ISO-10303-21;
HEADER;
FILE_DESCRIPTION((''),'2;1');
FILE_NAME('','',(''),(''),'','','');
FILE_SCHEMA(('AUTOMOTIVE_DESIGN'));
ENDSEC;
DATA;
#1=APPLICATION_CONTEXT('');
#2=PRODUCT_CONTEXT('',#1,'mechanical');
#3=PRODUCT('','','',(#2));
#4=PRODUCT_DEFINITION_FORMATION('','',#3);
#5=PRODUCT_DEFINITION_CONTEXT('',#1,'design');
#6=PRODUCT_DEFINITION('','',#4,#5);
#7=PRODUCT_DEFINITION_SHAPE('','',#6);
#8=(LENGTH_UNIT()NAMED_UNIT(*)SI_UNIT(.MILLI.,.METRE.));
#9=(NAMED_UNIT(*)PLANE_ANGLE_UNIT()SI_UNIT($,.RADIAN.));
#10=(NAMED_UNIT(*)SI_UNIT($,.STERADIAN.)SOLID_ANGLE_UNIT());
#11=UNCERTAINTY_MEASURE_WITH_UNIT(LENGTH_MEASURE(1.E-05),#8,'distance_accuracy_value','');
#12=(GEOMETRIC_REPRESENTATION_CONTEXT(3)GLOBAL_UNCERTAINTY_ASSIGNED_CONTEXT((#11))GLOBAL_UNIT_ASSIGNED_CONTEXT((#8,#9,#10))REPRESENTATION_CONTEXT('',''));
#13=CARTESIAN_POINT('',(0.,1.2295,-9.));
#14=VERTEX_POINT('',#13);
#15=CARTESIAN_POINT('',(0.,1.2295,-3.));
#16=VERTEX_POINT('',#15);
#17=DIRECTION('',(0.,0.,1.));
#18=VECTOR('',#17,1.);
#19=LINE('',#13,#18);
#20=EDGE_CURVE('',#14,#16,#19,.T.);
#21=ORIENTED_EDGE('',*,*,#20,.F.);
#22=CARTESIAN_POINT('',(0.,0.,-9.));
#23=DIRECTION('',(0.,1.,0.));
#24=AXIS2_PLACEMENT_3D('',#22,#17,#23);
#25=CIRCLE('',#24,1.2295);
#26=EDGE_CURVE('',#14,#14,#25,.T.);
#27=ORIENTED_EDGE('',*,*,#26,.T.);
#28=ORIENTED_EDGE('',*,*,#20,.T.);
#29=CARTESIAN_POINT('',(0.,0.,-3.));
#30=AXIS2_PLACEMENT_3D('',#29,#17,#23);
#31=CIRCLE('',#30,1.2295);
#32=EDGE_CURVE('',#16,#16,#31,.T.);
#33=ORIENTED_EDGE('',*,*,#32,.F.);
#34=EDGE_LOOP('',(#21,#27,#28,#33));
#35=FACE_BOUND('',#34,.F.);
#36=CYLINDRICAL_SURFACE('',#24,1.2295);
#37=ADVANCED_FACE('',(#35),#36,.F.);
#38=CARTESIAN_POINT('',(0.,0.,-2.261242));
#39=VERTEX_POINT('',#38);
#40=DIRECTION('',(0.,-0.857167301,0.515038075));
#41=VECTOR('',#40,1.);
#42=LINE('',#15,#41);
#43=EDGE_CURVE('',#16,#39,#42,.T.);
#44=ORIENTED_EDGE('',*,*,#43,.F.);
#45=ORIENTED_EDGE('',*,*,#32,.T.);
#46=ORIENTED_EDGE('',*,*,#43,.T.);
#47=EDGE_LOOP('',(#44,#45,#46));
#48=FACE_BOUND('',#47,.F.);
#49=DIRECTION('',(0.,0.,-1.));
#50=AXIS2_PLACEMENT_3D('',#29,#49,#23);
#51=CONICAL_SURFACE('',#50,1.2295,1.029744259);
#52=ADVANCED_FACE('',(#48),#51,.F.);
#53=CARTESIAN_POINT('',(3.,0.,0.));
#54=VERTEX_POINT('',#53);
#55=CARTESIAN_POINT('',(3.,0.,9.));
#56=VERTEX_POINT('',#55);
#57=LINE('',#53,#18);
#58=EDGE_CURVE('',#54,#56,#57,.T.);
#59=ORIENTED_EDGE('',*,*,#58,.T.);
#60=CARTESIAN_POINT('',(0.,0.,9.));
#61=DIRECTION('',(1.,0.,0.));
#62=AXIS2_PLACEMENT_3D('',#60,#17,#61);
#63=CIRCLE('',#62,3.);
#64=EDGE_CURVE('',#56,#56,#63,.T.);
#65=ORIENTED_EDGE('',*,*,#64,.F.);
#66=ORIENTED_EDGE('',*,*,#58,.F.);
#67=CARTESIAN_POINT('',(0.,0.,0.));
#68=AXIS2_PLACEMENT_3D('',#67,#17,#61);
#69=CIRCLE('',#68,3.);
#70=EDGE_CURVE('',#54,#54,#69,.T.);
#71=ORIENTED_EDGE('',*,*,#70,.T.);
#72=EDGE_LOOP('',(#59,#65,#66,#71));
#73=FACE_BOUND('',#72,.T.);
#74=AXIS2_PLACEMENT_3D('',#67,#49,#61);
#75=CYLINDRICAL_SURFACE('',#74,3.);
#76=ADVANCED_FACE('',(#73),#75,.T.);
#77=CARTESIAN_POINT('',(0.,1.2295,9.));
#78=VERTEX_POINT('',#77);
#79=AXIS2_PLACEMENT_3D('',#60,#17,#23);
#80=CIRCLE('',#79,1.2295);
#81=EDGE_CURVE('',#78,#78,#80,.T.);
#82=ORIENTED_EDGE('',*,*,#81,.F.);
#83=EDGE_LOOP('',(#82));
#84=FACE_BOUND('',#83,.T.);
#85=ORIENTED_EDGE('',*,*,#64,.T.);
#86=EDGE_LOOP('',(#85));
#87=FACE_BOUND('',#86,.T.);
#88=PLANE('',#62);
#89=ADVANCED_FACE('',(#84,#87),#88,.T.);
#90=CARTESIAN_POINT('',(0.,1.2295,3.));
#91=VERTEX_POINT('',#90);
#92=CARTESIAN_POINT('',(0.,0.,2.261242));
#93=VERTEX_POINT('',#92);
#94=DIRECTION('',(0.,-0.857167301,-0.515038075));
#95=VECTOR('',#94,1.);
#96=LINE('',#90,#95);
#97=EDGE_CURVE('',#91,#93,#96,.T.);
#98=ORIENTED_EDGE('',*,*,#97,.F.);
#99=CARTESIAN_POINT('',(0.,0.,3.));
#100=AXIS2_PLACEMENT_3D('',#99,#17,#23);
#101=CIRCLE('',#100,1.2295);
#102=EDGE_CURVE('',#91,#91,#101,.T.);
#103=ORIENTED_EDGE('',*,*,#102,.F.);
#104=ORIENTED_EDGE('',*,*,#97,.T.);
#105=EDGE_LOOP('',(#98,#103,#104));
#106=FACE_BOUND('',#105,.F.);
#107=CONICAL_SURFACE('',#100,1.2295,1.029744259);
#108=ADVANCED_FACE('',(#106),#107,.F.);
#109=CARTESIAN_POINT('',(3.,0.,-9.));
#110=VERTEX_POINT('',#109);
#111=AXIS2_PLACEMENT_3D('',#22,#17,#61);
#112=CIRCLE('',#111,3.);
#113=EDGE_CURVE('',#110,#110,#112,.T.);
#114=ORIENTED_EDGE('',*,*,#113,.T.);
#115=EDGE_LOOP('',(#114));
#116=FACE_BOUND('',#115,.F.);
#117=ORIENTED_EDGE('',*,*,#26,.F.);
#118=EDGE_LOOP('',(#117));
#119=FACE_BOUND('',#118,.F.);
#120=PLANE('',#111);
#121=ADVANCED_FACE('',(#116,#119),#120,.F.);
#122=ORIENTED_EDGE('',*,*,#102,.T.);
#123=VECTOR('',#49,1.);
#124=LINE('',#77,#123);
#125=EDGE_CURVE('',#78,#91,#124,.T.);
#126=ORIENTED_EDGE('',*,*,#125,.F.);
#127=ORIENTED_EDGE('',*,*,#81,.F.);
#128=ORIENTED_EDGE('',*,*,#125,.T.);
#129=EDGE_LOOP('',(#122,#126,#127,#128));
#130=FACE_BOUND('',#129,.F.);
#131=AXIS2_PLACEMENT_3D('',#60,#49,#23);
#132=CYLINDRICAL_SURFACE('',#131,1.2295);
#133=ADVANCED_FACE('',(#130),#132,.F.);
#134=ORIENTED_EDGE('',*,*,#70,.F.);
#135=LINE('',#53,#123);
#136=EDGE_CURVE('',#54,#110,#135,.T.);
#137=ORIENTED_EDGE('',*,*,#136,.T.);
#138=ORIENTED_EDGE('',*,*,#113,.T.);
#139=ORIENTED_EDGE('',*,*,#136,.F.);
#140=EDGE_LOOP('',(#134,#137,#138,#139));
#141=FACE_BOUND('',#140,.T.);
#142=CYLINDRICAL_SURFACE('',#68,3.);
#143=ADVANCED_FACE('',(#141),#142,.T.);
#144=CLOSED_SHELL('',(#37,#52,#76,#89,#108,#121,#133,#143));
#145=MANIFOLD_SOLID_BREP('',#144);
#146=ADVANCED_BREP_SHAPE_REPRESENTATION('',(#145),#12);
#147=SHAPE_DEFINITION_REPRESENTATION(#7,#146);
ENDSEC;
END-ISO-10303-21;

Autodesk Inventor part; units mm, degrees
ref_plane "YZ Plane" through (0, 0, 0) normal (1, 0, 0) x (0, 1, 0)
ref_plane "XZ Plane" through (0, 0, 0) normal (0, 1, 0) x (-1, 0, 0)
ref_plane "XY Plane" through (0, 0, 0) normal (0, 0, 1) x (1, 0, 0)
sketch "Skizze1" plane through (0, 0, 0) normal (0, 0, 1) x (1, 0, 0)
  circle A0 centre (0, 0) radius 3
  dimension "d0" = 6
extrude "Extrusion1" add sketch "Skizze1" along normal mid plane 18
sketch "Skizze3" plane through (0, 0, -9) normal (0, 0, -1) x (-1, 0, 0)
  point P0 (0, 0)
  point P1 (0, 0)
hole "Bohrung2" at (0, 0, -9) direction (0, 0, 1) diameter 2.459 depth 6 tip angle 118 thread size "M3x0.5" class "6H" standard "ISO Metric profile"
mirror "Spiegeln1" about plane through (0, 0, 0) normal (0, 0, 1) of "Bohrung2"
properties part number "Abstandsbolzen_Kamera"
